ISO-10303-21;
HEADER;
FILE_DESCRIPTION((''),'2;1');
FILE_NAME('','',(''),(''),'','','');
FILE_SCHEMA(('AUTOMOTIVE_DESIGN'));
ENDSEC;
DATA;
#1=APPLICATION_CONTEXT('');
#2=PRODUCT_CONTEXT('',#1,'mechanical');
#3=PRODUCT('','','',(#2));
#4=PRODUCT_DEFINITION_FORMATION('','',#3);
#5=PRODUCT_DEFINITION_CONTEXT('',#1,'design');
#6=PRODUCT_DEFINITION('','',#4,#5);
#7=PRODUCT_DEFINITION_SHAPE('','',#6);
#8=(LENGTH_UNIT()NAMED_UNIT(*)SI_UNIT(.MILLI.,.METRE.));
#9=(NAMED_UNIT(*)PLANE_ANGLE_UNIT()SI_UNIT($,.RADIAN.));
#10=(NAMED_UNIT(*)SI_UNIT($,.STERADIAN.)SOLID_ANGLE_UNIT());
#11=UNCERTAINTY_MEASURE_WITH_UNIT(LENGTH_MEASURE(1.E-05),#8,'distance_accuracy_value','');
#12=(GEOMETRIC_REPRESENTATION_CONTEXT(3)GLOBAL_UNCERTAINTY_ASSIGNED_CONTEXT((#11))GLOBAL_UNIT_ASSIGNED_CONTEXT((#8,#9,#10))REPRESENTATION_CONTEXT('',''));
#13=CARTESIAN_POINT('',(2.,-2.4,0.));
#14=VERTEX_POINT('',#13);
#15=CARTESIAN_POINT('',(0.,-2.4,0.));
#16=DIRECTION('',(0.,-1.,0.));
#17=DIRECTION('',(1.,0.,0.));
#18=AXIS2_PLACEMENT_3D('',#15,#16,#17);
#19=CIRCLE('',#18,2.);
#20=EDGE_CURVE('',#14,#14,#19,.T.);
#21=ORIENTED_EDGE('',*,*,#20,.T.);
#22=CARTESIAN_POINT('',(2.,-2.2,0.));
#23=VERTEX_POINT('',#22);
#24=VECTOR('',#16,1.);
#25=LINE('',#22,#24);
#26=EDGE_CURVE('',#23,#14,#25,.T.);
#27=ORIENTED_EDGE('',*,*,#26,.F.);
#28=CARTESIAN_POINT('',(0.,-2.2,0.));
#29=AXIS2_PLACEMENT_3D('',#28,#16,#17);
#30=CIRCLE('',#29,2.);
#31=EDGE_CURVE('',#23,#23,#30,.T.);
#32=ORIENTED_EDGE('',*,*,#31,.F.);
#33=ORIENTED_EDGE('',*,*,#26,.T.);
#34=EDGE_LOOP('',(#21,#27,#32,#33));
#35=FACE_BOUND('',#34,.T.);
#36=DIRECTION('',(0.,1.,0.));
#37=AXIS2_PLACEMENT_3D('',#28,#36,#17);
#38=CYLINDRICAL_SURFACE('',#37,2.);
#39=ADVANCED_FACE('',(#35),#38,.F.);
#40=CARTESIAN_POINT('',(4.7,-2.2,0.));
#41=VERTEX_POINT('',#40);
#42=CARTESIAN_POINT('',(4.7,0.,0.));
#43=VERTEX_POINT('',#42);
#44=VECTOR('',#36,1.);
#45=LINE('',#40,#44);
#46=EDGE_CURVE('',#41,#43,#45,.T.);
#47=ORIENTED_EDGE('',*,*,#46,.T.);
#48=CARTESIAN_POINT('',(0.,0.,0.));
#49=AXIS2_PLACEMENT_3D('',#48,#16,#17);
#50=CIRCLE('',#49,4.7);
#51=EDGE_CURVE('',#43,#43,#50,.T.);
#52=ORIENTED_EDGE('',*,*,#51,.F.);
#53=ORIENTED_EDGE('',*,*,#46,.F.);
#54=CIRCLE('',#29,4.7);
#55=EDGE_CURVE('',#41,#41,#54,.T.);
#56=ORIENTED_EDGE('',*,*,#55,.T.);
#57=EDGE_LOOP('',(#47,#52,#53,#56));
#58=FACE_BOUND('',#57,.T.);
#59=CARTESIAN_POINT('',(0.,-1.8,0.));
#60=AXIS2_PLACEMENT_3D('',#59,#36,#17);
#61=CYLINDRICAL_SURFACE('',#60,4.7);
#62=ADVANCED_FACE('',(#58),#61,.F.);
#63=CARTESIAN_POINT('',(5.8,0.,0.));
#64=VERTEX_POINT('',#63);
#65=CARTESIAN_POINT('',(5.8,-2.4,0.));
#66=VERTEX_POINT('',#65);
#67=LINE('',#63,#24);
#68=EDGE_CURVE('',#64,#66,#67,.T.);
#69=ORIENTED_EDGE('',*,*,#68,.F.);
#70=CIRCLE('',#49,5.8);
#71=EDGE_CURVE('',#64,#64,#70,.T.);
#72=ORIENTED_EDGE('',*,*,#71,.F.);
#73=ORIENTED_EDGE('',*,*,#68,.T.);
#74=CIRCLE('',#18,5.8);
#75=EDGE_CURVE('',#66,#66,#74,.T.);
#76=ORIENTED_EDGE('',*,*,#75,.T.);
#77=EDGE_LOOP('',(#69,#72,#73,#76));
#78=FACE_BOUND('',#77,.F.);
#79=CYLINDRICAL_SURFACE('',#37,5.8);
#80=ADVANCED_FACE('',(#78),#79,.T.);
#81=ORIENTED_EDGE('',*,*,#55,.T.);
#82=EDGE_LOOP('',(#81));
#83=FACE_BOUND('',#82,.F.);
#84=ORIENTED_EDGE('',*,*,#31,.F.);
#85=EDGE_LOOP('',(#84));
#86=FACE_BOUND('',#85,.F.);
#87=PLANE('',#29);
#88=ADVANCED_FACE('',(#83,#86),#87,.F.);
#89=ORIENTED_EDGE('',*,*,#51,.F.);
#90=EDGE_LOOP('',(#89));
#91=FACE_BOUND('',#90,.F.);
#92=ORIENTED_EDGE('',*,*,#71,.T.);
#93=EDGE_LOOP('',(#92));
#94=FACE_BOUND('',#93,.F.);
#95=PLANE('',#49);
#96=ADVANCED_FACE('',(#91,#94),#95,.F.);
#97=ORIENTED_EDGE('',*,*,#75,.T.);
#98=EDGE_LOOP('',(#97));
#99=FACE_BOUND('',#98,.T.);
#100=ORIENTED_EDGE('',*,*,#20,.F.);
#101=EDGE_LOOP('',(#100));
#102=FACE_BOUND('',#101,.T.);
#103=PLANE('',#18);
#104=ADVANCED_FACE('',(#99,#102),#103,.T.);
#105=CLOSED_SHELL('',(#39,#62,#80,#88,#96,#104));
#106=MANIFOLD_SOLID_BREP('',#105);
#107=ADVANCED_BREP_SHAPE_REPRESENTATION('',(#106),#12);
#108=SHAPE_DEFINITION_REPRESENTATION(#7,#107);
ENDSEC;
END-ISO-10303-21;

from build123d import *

# Parameters (mm, degrees)
F0_R     = 5.8
F1_DEPTH = 1.8
F2_R     = 5.8
F2_R_2   = 4.7
F3_DEPTH = 0.4
F4_R     = 4.7
F5_DEPTH = 1.8
F6_R     = 5.8
F6_R_2   = 4.7
F6_R_3   = 2
F7_DEPTH = 0.2


# Not quite as in the source:
# - a feature names something its author has since deleted; it is built from what else it names


with BuildPart() as f1:
    # F0 (on Front) → F1 (new body)
    with BuildSketch(Plane.XZ):
        Circle(F0_R)
    extrude(amount=F1_DEPTH)

    # F2 (on face) → F3 (join)
    with BuildSketch(Plane.XZ.offset(1.8)):
        Circle(F2_R)
        Circle(F2_R_2, mode=Mode.SUBTRACT)
    extrude(amount=F3_DEPTH)

    # F4 (on face) → F5 (cut)
    with BuildSketch(Plane.XZ.offset(1.8)):
        Circle(F4_R)
    extrude(amount=-F5_DEPTH, mode=Mode.SUBTRACT)

    # F6 (on face) → F7 (join)
    with BuildSketch(Plane.XZ.offset(2.2)):
        Circle(F6_R)
        Circle(F6_R_2, mode=Mode.SUBTRACT)
        Circle(F6_R_2)
        Circle(F6_R_3, mode=Mode.SUBTRACT)
    extrude(amount=F7_DEPTH)


solid = f1.part
